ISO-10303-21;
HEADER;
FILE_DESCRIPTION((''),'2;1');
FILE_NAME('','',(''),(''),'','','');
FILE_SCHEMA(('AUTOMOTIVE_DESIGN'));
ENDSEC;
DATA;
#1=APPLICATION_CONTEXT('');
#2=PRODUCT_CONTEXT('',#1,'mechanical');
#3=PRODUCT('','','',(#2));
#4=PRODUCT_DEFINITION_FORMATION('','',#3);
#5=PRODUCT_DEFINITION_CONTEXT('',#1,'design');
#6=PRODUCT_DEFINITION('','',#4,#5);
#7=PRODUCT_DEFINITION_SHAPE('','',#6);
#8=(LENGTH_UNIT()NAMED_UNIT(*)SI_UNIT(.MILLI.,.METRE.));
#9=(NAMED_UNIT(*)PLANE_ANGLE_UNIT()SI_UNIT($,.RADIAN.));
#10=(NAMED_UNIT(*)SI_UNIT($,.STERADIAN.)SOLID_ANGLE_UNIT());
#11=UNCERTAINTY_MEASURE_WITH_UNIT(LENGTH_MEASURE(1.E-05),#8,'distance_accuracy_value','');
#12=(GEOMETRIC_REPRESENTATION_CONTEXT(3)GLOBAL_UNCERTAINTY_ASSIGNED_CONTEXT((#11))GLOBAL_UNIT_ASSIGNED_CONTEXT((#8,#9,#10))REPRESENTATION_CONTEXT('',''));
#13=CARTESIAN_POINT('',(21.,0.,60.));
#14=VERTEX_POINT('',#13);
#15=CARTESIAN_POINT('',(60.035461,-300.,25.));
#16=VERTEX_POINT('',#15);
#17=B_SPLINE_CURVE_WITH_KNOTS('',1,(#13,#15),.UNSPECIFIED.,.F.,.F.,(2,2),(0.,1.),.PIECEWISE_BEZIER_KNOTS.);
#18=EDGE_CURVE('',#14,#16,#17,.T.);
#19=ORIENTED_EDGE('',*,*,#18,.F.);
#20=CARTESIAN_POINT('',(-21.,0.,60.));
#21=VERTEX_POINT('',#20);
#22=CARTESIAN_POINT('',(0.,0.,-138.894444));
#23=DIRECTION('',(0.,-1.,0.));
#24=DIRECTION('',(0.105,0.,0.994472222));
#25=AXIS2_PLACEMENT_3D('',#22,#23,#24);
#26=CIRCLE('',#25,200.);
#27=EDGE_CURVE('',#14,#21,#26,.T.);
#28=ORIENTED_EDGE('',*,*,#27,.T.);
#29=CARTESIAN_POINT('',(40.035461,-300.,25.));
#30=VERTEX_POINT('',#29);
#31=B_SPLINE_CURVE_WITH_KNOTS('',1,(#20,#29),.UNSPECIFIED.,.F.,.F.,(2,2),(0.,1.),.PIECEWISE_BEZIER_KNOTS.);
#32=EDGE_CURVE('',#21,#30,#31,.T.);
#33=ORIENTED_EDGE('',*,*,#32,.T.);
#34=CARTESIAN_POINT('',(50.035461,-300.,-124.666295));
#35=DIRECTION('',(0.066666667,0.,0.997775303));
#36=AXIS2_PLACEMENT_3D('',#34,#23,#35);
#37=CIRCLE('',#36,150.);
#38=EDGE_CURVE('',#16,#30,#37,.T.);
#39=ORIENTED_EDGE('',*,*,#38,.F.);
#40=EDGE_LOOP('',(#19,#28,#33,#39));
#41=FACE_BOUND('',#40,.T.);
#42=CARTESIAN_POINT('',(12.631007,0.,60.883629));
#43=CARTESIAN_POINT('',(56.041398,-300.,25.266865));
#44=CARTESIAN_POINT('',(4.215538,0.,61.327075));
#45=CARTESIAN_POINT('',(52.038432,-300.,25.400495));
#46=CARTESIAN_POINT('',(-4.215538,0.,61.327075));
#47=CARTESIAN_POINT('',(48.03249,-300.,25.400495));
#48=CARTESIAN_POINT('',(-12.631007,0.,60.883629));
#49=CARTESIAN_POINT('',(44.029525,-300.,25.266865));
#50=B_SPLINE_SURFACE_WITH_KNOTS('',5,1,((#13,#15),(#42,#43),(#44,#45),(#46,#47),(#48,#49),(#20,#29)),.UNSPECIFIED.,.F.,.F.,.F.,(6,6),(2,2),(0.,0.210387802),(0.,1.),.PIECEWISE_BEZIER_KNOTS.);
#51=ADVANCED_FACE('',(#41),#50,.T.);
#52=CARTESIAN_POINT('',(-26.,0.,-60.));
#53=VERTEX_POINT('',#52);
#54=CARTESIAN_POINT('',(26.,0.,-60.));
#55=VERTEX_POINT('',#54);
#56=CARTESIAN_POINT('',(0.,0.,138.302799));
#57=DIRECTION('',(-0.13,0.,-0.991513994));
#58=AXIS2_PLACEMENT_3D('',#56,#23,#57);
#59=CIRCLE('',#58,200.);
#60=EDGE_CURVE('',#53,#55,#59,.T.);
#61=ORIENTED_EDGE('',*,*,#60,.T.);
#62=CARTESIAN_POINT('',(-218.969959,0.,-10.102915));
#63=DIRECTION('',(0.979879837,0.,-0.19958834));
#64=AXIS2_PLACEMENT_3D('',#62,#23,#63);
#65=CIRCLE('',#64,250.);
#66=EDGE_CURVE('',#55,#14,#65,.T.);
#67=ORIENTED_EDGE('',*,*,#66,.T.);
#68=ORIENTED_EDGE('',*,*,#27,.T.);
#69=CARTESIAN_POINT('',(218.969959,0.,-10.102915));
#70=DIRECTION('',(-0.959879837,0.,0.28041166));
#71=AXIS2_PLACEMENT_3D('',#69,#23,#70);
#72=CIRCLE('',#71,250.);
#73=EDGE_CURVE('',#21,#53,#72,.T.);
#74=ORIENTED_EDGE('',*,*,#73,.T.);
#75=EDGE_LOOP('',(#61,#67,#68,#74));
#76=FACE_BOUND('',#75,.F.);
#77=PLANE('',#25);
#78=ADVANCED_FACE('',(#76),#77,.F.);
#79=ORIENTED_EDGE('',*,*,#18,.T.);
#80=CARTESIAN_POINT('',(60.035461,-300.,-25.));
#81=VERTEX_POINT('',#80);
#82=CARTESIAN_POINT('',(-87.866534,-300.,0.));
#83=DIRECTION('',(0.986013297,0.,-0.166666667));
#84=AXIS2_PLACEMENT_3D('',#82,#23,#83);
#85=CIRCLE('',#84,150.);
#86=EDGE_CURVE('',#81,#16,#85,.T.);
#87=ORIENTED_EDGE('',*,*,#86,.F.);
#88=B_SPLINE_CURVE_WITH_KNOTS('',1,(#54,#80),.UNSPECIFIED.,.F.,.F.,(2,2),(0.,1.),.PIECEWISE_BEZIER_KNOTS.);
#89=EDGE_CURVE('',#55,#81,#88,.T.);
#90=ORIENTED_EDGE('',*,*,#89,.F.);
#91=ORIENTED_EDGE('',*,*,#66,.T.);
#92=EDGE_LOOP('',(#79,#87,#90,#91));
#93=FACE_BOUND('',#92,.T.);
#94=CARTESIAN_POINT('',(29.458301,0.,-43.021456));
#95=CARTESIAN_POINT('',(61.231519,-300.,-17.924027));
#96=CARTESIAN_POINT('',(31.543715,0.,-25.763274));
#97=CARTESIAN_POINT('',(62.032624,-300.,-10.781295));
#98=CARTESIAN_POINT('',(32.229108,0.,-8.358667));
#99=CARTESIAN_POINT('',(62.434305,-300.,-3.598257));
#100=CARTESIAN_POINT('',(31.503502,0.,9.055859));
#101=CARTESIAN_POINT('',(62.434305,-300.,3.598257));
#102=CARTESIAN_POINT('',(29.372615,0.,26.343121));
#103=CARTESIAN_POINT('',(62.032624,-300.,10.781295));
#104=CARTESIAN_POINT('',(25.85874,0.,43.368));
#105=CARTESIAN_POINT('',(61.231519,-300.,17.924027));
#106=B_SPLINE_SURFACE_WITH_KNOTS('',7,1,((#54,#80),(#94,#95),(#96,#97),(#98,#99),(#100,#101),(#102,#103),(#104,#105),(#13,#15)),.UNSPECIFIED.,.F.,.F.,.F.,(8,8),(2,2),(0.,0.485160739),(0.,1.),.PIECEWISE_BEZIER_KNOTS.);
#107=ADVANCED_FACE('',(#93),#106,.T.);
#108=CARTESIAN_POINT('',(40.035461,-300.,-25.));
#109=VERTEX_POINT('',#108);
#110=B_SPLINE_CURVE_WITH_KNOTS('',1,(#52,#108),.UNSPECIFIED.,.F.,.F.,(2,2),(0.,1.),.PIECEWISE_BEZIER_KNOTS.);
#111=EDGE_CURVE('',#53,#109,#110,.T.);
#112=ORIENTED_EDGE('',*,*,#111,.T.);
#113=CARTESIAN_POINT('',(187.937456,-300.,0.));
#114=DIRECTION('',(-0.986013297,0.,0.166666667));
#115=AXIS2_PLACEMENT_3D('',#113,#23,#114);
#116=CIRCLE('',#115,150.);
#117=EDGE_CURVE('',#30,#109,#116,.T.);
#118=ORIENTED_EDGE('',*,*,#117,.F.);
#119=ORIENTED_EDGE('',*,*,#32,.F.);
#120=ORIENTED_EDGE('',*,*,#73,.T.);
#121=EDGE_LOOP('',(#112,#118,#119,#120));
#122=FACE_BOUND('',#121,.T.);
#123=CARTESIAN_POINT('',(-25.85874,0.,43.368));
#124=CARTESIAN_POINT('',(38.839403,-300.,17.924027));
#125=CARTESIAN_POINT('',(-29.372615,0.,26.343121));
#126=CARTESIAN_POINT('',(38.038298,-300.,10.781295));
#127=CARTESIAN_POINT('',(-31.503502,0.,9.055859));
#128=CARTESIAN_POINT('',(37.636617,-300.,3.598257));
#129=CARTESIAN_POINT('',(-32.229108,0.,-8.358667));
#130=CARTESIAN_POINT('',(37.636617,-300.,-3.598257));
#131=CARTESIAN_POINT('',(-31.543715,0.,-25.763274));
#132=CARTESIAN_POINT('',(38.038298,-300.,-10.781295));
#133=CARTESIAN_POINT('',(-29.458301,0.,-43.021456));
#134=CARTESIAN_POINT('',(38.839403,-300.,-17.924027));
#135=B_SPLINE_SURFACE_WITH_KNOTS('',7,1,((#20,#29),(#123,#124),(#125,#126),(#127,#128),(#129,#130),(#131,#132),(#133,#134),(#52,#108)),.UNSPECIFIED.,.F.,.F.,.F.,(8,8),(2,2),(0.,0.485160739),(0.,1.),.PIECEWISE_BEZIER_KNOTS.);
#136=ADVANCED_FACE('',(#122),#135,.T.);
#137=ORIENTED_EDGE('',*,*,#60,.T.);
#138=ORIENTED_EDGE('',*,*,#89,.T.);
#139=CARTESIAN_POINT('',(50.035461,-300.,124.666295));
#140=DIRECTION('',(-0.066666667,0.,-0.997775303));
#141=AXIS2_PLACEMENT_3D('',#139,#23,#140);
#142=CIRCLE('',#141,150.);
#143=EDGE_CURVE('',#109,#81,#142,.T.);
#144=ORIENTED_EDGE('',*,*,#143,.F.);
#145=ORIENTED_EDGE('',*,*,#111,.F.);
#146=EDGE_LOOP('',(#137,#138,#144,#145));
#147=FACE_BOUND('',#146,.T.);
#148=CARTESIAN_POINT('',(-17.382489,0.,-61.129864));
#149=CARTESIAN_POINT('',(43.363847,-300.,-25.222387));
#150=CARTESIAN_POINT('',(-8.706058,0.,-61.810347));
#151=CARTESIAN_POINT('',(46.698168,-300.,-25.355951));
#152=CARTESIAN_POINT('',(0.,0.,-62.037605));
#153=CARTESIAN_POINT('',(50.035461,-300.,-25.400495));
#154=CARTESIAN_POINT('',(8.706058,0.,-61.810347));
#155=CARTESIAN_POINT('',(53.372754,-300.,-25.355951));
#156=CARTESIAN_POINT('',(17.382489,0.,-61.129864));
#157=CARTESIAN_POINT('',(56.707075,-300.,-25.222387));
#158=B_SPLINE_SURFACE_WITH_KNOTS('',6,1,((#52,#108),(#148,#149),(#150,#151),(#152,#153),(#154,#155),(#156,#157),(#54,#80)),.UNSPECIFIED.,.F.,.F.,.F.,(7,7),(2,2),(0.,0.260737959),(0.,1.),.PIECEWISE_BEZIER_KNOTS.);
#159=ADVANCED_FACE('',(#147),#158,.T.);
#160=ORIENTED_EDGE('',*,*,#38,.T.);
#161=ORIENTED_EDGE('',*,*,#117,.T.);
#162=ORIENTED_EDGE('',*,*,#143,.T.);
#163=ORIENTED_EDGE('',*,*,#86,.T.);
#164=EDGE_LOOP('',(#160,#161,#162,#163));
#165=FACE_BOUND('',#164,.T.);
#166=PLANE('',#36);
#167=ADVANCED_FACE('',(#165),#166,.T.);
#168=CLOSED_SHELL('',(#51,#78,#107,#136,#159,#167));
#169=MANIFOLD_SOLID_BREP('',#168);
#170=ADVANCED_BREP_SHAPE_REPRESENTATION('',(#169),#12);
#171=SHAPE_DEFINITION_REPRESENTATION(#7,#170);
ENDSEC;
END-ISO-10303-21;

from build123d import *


with BuildPart() as f3:
    # F0 (on Front) → F3 section 0
    with BuildSketch(Plane.XZ):
        with BuildLine():
            ThreePointArc((21, 60), (0, 61.1055556331), (-21, 60))
            ThreePointArc((-21, 60), (-30.8133090839, 0.3047212118), (-26, -60))
            ThreePointArc((-26, -60), (0, -61.69720123), (26, -60))
            ThreePointArc((26, -60), (30.8133090839, 0.3047212118), (21, 60))
        make_face()
    # F2 (on offset) → F3 section 1
    with BuildSketch(Plane.XZ.offset(300)):
        with BuildLine():
            ThreePointArc((60.0354610384, 25), (50.0354610384, 25.333704529), (40.0354610384, 25))
            ThreePointArc((40.0354610384, 25), (37.9374556158, 0), (40.0354610384, -25))
            ThreePointArc((40.0354610384, -25), (50.0354610384, -25.333704529), (60.0354610384, -25))
            ThreePointArc((60.0354610384, -25), (62.1334664609, 0), (60.0354610384, 25))
        make_face()
    loft()


solid = f3.part
